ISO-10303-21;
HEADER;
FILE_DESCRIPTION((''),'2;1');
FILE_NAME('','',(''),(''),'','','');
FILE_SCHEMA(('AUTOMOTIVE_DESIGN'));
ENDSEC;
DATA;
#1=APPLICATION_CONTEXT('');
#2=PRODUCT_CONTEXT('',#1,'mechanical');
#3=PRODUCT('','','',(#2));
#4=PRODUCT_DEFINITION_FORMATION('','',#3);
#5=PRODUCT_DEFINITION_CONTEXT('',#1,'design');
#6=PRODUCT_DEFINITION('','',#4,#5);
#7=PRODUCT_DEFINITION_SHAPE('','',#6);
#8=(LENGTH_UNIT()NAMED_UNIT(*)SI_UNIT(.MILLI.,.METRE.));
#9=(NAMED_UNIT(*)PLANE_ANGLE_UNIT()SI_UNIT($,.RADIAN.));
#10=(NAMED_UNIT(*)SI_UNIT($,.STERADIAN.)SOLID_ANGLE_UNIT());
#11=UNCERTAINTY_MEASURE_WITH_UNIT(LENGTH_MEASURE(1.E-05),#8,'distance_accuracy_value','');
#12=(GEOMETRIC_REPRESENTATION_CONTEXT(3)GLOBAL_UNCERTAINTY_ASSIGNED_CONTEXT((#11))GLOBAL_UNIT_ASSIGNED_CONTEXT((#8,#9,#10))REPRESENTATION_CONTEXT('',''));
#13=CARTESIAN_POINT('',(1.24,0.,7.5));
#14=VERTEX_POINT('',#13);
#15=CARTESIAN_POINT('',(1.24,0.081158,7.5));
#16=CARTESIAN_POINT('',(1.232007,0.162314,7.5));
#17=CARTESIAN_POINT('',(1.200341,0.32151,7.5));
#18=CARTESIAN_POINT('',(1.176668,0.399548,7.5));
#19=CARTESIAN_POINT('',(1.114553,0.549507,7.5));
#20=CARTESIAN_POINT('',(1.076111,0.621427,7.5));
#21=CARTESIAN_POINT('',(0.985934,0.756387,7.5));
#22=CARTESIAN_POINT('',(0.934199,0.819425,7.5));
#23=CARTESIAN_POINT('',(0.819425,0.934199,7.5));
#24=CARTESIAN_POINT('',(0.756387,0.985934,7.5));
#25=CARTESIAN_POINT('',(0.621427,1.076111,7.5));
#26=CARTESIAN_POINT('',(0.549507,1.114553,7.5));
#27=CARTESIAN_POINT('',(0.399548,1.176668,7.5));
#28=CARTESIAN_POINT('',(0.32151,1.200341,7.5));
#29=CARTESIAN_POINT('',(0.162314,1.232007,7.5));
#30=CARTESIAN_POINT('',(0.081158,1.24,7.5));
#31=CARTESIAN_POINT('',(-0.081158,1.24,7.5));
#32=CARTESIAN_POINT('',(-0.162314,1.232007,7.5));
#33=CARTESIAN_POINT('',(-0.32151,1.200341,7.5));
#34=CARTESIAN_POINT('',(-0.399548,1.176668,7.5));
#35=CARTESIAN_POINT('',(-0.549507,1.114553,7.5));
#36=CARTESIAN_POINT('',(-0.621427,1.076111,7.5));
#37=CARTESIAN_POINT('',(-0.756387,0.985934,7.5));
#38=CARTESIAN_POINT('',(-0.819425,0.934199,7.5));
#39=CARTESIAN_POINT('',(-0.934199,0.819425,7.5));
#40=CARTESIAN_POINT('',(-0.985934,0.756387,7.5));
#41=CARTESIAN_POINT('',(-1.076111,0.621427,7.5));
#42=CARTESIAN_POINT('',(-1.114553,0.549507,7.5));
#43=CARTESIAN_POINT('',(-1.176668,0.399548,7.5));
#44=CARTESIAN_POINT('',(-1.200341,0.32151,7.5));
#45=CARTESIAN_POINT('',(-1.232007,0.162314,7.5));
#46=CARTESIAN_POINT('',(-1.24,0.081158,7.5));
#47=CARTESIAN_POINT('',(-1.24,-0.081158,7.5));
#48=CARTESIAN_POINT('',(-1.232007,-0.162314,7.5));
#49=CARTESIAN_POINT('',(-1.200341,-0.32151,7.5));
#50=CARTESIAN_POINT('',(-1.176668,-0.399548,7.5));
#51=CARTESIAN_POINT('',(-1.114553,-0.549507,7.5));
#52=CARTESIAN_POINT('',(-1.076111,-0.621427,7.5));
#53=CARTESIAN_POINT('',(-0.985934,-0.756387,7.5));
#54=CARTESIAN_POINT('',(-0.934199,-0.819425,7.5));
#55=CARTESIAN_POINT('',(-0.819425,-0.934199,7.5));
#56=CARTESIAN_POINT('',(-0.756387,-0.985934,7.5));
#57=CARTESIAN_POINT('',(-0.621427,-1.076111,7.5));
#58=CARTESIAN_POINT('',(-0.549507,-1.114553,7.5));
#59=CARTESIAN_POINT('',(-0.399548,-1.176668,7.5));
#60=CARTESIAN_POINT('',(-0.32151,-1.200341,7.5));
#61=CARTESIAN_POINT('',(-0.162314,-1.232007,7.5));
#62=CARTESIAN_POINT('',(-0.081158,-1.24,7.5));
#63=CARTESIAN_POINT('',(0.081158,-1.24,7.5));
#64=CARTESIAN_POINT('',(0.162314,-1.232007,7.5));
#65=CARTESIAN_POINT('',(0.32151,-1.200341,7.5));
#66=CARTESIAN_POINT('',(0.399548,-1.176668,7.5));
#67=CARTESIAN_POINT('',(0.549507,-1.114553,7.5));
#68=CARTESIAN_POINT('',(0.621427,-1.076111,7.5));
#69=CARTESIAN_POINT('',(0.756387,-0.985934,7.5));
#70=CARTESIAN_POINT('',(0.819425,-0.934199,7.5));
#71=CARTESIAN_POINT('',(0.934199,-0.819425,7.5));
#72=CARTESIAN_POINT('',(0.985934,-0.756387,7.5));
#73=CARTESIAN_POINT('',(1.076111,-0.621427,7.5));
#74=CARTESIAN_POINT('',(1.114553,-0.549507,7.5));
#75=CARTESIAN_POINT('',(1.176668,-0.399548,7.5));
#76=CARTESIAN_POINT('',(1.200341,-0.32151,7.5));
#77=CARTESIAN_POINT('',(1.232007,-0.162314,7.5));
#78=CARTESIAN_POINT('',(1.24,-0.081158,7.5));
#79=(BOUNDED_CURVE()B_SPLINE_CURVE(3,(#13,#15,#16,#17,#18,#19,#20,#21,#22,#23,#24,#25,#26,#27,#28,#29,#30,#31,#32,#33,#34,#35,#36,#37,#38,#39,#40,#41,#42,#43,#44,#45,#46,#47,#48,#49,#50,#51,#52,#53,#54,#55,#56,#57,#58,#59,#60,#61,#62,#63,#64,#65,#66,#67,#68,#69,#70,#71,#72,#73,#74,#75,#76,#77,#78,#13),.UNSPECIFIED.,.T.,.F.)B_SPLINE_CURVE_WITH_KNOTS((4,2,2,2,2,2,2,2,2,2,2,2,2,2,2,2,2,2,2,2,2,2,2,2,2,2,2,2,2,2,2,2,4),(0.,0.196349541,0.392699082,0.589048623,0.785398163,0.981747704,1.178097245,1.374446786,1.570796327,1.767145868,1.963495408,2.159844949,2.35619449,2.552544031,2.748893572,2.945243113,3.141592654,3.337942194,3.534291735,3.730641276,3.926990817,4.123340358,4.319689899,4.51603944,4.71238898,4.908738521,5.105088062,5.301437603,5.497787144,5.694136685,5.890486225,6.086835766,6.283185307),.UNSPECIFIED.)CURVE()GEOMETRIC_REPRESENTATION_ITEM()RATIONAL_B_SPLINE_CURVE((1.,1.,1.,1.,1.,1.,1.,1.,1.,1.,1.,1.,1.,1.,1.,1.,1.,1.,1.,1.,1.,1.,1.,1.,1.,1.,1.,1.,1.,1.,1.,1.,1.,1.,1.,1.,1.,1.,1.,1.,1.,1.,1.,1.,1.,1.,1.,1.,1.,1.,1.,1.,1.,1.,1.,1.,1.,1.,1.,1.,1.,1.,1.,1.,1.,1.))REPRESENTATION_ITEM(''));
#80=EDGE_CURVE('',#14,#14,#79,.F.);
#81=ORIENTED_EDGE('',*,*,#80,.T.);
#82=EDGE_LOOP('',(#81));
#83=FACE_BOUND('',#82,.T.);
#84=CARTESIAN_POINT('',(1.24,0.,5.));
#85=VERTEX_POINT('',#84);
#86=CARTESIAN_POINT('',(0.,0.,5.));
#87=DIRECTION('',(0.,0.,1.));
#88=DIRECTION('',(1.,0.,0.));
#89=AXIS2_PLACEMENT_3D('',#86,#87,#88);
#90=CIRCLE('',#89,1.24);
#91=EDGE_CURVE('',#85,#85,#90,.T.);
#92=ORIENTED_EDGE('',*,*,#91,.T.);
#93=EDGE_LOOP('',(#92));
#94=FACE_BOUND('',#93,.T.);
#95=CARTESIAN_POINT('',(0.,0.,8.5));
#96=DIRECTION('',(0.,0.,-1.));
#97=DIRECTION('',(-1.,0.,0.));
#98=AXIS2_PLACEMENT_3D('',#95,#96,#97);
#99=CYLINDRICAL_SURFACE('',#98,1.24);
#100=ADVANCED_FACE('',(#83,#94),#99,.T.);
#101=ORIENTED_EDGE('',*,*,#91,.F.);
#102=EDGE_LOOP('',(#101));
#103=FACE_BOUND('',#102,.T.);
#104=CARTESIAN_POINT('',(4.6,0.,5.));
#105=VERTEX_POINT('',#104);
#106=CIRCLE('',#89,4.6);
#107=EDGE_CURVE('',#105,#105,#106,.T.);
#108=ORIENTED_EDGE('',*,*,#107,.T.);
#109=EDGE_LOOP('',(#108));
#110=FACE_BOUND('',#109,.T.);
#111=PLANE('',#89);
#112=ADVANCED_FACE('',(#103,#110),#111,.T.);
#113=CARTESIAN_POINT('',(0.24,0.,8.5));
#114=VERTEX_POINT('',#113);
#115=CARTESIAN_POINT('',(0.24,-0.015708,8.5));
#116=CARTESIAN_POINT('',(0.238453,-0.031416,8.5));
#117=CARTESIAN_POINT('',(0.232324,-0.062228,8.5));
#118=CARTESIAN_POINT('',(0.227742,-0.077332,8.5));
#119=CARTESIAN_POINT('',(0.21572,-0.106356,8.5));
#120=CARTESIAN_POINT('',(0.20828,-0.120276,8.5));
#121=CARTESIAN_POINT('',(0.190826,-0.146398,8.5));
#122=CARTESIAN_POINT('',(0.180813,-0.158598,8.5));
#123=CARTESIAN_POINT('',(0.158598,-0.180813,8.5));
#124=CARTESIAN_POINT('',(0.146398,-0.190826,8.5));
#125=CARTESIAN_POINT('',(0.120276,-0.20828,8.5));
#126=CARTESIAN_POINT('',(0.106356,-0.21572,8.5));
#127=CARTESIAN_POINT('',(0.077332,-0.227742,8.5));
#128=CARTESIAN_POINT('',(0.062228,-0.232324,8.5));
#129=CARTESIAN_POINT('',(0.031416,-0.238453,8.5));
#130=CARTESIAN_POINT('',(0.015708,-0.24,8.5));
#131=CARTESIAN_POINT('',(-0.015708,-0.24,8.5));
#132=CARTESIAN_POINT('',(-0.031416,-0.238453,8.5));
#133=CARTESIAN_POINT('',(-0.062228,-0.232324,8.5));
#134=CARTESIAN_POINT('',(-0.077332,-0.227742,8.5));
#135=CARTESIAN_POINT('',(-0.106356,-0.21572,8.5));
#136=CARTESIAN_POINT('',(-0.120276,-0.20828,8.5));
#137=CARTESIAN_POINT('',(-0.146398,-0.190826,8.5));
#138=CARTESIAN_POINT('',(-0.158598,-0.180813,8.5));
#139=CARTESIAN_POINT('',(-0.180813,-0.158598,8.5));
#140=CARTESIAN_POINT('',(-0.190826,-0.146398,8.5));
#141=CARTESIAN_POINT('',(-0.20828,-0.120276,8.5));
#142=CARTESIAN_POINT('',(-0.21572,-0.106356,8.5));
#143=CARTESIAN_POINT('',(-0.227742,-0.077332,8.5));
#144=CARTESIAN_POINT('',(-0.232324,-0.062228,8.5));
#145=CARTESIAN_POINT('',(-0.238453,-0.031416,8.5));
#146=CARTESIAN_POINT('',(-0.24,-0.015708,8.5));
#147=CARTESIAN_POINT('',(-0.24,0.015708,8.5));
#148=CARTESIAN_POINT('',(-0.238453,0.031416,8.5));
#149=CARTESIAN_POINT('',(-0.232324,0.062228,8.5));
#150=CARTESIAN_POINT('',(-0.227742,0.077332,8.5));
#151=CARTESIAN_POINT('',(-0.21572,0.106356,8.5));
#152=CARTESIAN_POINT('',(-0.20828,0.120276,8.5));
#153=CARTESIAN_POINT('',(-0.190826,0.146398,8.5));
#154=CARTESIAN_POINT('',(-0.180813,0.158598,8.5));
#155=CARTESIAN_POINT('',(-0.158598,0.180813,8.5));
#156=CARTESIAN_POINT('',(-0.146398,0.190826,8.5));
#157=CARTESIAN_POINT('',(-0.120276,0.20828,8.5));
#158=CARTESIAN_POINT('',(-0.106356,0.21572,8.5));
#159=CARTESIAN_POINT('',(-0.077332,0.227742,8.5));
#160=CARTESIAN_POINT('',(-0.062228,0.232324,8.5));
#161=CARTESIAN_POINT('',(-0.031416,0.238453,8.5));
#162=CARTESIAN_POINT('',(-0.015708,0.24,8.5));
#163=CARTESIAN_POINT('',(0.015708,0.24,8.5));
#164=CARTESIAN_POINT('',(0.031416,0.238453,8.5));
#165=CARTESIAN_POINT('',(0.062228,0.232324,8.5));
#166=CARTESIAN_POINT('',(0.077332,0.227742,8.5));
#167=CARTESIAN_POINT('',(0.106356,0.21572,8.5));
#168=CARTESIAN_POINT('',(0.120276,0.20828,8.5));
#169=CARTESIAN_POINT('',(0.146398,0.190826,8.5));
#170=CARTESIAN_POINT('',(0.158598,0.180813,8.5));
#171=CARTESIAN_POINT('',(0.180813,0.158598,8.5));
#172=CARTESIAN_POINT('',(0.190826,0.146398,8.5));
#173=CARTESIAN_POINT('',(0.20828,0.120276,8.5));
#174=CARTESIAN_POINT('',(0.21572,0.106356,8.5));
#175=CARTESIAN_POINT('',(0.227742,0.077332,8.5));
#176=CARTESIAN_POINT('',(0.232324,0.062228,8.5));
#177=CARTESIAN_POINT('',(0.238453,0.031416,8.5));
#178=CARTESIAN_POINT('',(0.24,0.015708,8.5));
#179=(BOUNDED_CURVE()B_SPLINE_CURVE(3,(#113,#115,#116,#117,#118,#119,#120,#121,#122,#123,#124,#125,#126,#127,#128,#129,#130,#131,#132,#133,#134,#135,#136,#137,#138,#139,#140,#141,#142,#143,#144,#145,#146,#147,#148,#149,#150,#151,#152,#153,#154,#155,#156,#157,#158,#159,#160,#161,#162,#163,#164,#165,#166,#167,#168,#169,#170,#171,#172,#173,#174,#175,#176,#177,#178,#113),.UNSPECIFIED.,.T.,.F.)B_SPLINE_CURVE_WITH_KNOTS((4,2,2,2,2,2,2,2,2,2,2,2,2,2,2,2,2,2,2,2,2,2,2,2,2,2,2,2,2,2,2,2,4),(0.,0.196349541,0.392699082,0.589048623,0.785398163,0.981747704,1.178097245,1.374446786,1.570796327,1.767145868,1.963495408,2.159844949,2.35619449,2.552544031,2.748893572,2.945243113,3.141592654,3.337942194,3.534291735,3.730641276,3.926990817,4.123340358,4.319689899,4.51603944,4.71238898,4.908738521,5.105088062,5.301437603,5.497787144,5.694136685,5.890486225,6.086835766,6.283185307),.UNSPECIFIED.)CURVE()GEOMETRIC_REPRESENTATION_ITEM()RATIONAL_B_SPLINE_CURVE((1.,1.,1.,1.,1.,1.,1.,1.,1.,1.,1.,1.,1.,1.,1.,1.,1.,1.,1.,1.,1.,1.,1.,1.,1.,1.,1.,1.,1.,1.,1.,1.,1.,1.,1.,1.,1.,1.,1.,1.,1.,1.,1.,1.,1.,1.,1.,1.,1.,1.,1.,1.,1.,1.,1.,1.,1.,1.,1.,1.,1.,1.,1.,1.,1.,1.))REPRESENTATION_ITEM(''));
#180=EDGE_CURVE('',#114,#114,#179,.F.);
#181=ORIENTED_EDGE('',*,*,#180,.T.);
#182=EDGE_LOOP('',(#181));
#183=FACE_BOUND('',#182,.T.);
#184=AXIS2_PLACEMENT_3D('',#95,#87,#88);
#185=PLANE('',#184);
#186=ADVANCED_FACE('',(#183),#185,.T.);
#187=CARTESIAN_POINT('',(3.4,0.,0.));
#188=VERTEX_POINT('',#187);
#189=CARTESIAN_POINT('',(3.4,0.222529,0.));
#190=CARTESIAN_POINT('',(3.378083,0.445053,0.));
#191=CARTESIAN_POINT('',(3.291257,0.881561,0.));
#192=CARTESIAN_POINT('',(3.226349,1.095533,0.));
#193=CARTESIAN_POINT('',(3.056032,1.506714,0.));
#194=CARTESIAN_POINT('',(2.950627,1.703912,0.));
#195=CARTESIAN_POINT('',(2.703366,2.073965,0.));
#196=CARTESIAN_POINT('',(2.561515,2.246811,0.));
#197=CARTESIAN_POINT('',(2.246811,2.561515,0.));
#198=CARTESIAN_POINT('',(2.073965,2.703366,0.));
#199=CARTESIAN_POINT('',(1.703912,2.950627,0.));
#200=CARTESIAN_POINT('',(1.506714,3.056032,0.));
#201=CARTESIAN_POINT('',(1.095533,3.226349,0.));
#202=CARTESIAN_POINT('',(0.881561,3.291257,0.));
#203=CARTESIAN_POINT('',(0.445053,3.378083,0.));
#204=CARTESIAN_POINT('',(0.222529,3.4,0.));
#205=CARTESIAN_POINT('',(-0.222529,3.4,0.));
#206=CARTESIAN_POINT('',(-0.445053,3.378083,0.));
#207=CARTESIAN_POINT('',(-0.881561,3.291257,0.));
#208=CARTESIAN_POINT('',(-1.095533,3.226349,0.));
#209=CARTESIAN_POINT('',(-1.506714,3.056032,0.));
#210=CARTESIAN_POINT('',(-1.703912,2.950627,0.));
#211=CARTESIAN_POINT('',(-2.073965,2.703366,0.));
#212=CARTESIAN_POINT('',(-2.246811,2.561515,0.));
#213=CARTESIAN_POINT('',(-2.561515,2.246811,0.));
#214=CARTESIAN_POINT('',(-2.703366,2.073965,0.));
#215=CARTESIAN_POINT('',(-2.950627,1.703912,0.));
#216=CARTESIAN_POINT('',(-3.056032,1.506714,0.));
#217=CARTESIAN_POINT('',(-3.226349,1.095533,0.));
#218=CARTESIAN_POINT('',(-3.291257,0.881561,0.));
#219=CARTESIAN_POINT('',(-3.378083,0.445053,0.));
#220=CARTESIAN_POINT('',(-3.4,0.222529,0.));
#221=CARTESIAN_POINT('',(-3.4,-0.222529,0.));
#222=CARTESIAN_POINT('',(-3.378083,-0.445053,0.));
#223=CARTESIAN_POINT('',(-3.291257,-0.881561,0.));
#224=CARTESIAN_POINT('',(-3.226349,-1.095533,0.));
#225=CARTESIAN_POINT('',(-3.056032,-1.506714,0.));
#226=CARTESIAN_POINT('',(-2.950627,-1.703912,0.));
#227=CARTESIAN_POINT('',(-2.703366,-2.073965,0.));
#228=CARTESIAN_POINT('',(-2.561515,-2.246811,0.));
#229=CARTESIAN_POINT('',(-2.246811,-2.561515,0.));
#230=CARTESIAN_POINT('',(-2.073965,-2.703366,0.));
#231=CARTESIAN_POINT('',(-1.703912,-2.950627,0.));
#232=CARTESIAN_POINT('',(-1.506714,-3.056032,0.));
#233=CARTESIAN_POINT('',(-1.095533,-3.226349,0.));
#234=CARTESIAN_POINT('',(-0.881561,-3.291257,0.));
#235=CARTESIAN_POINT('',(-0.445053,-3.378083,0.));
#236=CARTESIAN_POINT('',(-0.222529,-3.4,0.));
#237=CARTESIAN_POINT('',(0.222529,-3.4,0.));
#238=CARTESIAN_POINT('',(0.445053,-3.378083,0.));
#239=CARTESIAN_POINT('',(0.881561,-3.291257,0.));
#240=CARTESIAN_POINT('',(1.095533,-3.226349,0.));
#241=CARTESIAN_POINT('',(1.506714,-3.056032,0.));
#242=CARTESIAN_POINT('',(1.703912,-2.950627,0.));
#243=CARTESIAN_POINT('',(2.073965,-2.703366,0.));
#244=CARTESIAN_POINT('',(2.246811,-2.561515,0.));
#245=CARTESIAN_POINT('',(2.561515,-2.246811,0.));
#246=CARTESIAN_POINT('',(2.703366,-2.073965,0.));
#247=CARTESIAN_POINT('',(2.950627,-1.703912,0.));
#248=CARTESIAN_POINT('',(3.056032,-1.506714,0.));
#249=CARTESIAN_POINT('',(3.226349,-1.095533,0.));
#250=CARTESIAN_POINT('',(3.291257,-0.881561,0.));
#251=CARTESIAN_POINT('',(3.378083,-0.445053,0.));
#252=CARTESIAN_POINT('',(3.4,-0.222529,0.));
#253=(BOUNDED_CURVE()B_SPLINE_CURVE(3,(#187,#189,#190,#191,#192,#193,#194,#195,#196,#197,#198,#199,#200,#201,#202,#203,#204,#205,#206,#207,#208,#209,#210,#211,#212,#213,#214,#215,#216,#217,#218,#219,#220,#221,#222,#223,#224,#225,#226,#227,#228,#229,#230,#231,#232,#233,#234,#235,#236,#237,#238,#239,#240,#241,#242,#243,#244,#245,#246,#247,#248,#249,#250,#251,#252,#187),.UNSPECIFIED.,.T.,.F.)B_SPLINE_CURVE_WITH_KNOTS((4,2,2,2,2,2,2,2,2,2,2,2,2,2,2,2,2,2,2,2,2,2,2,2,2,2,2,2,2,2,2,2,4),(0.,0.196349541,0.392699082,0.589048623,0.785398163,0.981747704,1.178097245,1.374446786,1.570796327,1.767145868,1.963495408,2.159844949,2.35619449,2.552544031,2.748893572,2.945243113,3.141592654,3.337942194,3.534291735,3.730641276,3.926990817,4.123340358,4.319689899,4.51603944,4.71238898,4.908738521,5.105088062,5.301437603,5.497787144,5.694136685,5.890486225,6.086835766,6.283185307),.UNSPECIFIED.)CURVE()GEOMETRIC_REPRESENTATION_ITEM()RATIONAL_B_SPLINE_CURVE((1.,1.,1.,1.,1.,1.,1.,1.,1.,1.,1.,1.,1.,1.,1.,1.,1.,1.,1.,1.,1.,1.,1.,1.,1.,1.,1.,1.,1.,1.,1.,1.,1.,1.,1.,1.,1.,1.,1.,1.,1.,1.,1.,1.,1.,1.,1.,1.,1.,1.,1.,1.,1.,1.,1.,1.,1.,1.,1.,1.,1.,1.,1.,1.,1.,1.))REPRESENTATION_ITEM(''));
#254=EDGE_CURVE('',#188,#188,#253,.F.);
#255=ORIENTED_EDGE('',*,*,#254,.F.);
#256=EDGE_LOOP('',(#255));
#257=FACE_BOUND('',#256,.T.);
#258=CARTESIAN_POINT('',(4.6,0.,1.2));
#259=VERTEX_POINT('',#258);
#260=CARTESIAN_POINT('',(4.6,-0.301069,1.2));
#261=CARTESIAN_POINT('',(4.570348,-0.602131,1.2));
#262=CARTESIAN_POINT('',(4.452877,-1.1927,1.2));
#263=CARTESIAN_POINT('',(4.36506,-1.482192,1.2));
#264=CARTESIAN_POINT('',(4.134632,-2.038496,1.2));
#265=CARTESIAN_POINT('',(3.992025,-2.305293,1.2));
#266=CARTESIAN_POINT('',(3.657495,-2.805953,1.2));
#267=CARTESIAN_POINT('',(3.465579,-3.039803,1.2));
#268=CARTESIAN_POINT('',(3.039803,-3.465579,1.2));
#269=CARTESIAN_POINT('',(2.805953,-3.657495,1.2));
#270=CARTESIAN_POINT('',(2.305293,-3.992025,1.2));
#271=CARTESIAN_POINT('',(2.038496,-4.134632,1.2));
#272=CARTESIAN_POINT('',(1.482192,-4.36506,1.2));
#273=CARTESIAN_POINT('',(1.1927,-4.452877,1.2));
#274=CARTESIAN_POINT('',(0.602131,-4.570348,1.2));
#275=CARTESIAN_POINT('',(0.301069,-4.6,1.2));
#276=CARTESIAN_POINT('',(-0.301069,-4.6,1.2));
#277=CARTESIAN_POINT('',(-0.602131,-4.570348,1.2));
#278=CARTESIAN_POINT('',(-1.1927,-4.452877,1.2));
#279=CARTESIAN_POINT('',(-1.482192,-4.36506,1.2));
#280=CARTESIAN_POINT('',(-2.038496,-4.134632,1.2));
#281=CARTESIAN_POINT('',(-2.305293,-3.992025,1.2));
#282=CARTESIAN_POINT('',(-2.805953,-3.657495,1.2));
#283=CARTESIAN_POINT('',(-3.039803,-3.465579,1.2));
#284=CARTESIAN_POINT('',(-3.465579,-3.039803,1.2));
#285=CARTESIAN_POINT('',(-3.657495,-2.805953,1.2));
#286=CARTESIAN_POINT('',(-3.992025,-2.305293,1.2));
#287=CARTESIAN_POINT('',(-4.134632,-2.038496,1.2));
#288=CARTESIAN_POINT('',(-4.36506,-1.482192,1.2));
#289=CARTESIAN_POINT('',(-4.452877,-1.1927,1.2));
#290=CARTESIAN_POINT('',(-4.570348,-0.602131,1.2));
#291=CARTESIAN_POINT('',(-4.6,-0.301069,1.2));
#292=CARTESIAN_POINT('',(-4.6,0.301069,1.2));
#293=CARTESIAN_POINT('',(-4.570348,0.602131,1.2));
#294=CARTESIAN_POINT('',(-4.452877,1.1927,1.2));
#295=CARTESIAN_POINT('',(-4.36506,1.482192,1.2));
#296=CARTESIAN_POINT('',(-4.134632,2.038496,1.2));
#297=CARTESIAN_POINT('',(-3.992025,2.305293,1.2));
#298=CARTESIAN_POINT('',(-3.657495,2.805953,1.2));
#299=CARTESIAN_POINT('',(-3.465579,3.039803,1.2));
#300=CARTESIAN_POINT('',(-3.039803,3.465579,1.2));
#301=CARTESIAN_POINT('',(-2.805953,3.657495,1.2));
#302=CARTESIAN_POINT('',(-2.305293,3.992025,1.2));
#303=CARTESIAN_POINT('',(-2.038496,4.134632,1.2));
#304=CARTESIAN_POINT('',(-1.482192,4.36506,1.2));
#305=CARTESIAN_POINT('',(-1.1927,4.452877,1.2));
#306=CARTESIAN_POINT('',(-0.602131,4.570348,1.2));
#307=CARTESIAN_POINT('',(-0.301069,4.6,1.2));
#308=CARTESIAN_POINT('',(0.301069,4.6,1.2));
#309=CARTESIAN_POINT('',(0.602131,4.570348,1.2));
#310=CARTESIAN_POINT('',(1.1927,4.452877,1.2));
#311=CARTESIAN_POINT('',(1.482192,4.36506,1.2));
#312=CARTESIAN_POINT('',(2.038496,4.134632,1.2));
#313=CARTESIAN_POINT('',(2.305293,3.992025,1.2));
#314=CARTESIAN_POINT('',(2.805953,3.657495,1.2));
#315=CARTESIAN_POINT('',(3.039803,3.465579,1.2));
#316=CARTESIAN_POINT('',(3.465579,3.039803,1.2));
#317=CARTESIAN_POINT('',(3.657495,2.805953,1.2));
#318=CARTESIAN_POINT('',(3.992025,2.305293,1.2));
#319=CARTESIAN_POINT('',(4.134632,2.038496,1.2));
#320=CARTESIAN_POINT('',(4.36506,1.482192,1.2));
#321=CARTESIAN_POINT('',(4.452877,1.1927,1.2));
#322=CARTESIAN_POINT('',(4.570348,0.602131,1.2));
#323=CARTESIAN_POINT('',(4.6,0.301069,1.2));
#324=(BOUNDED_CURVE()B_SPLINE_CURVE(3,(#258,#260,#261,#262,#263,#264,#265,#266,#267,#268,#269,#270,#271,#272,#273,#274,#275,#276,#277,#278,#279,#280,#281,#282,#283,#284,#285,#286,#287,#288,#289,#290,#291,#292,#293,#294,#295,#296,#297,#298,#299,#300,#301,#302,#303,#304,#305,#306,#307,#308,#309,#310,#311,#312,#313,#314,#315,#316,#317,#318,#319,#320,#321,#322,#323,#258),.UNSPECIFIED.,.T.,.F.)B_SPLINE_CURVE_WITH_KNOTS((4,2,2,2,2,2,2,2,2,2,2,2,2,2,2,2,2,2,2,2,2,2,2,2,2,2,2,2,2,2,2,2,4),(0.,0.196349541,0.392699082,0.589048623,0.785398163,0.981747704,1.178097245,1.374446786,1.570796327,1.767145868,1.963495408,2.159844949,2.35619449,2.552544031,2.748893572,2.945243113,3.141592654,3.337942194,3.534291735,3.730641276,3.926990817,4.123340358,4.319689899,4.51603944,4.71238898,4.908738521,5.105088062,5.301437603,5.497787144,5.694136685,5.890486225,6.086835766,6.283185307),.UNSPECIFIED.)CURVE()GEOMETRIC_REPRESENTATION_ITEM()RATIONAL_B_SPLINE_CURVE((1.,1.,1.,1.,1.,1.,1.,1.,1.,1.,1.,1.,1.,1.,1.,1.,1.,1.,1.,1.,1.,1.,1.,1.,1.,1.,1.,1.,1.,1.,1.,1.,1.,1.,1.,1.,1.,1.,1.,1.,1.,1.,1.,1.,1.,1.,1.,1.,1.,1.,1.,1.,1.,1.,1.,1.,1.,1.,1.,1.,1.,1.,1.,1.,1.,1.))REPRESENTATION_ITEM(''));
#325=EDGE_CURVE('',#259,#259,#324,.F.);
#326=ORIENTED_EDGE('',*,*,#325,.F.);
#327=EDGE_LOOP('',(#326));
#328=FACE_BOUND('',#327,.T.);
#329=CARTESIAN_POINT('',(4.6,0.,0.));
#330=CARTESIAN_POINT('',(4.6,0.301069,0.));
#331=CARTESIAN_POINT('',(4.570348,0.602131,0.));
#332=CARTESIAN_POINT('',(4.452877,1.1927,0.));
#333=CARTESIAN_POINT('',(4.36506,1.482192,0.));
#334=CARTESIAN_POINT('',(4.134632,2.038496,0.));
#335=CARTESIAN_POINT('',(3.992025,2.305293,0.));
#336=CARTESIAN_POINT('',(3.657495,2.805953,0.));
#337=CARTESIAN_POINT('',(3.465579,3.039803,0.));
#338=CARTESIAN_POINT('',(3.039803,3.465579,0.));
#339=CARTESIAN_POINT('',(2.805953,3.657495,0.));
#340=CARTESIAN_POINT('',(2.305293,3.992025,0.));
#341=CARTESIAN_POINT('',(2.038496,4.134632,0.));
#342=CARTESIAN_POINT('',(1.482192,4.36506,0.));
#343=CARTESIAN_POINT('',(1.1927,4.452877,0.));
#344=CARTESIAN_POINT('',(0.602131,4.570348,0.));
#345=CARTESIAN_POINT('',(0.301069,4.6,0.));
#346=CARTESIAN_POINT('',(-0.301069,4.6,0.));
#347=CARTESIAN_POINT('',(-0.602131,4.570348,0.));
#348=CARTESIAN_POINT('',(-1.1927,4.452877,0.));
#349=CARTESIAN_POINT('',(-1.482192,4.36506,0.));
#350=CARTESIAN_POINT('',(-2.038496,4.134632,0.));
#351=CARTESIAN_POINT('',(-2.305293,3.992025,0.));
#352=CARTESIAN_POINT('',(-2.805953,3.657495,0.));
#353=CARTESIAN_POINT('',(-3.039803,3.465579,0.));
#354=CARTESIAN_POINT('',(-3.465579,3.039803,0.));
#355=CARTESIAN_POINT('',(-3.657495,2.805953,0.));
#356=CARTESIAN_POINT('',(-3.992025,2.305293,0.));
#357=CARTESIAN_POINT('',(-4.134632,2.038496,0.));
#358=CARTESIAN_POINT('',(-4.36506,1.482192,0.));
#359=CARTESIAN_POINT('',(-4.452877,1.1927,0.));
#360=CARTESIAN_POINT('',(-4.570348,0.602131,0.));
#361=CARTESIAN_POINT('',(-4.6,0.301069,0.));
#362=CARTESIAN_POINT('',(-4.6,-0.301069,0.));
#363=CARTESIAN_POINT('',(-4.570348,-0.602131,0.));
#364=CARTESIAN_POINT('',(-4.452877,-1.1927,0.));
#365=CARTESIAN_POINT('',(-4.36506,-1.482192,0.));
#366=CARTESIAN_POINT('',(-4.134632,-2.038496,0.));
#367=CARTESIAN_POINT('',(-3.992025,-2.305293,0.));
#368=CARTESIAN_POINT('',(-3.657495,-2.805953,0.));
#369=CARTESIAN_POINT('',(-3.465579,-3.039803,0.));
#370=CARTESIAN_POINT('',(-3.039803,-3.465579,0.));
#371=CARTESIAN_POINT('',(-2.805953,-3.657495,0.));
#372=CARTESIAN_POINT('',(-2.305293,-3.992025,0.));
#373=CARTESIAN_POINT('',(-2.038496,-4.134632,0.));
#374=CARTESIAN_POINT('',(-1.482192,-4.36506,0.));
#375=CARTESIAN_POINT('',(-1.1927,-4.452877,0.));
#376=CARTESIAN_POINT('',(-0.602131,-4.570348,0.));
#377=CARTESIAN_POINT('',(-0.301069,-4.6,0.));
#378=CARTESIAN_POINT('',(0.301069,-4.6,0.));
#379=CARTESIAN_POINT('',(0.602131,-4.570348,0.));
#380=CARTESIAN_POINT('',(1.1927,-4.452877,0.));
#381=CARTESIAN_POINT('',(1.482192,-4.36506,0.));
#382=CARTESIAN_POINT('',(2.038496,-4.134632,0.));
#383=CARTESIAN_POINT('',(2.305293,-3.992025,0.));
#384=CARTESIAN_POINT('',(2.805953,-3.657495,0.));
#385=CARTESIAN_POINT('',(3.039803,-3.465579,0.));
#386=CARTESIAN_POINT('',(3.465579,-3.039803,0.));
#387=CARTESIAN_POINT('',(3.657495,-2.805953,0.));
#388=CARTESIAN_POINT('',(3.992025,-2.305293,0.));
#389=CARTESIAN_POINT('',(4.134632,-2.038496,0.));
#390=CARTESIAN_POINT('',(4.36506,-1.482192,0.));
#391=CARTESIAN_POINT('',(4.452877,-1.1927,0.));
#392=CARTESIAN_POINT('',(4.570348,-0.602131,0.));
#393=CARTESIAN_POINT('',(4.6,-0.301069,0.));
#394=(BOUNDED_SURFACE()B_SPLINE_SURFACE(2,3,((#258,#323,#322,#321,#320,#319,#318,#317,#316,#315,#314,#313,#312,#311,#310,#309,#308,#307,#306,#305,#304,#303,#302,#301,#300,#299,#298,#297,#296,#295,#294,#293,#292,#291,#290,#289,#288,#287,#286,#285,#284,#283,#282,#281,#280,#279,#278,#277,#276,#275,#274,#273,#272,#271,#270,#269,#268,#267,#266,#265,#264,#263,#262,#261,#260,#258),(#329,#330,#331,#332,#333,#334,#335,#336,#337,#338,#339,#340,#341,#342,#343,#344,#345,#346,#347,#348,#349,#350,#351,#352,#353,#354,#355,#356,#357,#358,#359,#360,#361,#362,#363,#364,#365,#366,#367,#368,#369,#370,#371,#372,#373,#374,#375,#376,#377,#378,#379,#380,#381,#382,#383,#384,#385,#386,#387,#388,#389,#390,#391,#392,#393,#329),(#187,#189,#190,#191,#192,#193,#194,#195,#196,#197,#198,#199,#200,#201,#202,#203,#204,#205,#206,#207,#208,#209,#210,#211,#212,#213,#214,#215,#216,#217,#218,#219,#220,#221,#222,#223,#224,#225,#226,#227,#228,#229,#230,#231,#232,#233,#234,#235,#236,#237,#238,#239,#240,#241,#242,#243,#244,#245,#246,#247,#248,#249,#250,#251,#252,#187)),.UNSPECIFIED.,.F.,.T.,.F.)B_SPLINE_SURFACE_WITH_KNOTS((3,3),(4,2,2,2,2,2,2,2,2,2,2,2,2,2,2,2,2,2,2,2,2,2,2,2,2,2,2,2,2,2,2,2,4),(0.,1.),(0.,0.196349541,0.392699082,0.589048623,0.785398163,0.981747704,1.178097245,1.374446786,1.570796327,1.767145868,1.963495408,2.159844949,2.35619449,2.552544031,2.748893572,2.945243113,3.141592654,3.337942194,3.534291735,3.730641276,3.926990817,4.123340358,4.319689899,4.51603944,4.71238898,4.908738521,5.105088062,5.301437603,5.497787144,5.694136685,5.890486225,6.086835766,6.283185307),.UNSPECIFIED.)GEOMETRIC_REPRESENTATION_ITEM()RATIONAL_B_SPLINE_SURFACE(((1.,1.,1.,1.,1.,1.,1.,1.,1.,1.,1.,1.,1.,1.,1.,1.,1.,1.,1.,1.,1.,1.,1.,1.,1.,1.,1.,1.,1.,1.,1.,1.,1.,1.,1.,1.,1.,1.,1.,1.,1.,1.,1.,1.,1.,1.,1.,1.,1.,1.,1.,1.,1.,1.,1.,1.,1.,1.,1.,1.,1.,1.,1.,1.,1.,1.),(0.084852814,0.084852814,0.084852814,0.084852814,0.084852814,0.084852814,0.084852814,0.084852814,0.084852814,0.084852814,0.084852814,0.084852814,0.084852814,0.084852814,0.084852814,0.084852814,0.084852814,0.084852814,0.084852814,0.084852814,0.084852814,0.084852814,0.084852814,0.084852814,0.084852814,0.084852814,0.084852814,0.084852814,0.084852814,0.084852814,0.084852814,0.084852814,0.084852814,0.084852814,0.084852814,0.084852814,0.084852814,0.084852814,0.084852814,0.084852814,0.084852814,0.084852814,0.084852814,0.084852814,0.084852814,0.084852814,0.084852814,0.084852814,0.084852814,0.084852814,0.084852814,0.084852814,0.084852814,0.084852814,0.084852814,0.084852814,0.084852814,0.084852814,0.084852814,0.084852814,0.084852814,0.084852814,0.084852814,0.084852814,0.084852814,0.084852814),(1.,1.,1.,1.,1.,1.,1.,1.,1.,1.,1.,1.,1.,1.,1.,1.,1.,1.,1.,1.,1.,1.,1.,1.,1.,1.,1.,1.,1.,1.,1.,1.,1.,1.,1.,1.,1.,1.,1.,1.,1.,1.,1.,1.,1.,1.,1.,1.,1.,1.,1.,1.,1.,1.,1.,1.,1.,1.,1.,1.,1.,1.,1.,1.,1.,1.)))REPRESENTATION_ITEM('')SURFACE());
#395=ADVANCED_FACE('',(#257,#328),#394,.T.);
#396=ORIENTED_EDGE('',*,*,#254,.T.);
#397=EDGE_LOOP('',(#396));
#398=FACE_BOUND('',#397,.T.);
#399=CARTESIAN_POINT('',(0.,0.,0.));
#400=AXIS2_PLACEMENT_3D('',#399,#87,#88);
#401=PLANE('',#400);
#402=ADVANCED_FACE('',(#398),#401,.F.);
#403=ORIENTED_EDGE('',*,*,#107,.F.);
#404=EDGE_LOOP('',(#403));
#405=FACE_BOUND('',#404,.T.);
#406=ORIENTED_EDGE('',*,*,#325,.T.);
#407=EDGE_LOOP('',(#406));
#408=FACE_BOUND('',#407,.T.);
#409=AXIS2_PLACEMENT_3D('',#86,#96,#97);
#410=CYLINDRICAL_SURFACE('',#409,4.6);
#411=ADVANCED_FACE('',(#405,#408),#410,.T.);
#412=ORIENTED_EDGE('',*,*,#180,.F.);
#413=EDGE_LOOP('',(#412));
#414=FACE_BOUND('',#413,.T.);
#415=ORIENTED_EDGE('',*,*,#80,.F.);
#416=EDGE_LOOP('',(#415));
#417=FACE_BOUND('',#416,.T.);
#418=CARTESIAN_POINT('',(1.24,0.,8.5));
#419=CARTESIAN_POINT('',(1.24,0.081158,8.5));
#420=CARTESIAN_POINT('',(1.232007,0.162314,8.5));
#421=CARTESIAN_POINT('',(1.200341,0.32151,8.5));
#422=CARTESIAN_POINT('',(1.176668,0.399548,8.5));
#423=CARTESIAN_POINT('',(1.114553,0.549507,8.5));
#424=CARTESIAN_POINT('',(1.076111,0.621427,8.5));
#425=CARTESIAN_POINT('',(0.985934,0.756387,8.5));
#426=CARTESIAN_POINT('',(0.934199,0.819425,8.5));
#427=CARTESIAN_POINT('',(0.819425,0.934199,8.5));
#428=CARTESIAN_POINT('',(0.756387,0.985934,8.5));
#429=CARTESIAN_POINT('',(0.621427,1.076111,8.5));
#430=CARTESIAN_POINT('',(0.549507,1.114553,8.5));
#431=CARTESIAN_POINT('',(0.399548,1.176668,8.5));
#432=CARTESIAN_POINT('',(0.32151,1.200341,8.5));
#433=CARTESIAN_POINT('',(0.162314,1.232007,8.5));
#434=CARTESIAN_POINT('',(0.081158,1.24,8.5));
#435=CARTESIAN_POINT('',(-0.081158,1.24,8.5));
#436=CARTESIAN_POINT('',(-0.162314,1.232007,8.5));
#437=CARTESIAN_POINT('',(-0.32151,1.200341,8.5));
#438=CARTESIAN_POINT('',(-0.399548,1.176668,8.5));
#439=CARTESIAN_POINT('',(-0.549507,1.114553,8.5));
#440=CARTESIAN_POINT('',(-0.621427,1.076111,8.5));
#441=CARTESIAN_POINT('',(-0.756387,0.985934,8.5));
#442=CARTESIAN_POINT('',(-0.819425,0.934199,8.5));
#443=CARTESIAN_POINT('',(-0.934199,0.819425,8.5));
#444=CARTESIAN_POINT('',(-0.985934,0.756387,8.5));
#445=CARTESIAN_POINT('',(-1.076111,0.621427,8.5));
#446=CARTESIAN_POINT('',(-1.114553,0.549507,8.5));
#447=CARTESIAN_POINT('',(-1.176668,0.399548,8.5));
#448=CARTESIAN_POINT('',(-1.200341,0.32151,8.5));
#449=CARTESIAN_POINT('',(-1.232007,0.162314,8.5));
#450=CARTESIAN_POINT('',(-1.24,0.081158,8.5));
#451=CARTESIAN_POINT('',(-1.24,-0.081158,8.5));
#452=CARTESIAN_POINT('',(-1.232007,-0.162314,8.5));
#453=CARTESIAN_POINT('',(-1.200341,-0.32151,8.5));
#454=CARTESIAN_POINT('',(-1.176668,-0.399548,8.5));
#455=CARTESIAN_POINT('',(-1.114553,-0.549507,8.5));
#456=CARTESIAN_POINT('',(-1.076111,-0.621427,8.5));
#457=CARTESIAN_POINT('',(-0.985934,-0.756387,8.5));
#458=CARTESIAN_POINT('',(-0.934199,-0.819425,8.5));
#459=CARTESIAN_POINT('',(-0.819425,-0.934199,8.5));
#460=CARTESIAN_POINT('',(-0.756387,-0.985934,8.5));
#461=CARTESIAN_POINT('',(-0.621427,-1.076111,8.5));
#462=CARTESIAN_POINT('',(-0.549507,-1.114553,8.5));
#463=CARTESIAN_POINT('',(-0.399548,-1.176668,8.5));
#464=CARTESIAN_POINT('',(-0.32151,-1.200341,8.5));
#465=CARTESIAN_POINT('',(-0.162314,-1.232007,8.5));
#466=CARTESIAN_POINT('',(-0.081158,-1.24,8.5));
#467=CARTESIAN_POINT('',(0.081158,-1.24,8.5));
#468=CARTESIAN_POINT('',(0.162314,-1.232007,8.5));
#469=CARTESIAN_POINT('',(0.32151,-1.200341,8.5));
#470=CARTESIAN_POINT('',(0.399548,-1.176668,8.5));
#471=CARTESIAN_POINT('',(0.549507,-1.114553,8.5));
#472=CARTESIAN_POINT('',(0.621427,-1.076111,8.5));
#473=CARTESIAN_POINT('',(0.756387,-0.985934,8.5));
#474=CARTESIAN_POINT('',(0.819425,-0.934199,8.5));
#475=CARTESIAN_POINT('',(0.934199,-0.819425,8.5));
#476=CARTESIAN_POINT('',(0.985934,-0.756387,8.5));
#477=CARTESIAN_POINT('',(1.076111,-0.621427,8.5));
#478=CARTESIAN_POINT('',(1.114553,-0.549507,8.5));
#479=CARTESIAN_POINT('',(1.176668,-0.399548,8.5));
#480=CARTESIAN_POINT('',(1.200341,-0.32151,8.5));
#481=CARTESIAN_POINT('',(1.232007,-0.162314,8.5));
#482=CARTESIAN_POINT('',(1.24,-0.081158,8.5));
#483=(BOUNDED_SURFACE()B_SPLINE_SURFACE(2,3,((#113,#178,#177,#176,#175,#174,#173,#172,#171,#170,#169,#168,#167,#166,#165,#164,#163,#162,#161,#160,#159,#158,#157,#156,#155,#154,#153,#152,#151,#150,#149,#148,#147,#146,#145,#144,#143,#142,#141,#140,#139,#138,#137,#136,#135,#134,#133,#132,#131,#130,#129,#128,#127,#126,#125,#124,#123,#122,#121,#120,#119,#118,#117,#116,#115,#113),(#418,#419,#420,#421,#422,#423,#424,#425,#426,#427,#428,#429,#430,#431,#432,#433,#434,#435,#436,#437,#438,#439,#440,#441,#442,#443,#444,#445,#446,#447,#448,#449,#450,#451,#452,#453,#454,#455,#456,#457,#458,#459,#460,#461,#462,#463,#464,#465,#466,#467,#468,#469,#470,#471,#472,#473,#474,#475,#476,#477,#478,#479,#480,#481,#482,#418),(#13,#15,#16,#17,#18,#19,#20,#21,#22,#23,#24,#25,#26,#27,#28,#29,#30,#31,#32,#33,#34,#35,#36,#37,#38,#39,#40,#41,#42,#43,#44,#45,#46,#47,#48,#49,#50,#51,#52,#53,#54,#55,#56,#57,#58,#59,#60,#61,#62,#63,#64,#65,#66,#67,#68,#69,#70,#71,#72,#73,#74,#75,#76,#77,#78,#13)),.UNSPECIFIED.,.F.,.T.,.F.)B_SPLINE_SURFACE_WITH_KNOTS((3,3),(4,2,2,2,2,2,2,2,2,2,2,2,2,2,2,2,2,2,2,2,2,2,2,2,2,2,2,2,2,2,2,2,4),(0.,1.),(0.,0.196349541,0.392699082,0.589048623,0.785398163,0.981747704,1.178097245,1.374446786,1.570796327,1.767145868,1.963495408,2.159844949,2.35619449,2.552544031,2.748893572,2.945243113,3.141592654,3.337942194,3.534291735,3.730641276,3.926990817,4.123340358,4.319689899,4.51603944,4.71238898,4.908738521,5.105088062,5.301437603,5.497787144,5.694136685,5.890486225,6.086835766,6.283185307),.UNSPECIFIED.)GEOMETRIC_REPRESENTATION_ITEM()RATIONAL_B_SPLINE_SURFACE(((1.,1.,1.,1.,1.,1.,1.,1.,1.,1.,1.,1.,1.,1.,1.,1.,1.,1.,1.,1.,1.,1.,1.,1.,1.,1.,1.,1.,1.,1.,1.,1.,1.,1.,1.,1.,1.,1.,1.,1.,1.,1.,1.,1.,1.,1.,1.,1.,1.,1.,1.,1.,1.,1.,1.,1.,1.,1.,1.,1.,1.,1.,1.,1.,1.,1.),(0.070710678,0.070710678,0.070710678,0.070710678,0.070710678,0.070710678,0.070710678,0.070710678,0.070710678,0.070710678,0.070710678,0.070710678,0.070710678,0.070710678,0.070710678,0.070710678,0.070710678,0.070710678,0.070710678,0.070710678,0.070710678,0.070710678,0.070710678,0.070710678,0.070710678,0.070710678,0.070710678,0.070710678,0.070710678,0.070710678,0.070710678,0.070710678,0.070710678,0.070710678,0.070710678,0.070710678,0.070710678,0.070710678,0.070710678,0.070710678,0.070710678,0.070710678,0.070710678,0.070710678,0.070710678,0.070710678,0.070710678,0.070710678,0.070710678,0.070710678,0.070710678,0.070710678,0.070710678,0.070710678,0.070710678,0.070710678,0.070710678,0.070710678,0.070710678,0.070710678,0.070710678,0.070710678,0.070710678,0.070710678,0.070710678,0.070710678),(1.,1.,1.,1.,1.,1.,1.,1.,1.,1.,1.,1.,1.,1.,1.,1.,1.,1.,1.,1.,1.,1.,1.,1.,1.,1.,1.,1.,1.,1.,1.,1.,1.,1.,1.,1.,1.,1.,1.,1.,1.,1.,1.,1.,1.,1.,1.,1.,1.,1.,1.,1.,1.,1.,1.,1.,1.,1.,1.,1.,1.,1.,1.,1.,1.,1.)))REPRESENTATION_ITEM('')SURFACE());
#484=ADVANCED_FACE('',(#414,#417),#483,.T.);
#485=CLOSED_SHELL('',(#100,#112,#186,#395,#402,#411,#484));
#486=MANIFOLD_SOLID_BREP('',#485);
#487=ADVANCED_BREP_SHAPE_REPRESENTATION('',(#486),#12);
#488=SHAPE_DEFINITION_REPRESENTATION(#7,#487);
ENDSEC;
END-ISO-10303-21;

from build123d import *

# Parameters (mm, degrees)
SKETCH_1_R      = 4.6
EXTRUDE_1_DEPTH = 5
SKETCH_2_R      = 1.24
EXTRUDE_2_DEPTH = 3.5
FILLET_1_SIZE   = 1
FILLET_2_SIZE   = 1.2


with BuildPart() as part:
    # 草图1 → 凸台-拉伸1 (new body)
    with BuildSketch(Plane.XY):
        Circle(SKETCH_1_R)
    extrude(amount=EXTRUDE_1_DEPTH)

    # 草图2 → 凸台-拉伸2 (add)
    with BuildSketch(Plane.XY.offset(5)):
        Circle(SKETCH_2_R)
    extrude(amount=EXTRUDE_2_DEPTH)

    # 圆角1
    # a fillet whose section is not a circle: 1 mm, written as the material it takes off along each edge
    with BuildSketch(Plane(origin=(0, 0, 8.5), x_dir=(1, 0, 0), z_dir=(0, -1, 0))) as fillet_1_piece_1:
        with BuildLine():
            Bezier((1.24, -FILLET_1_SIZE), (1.24, 0), (1.24 - FILLET_1_SIZE, 0), weights=[1, 0.070710678, 1])
            Line((1.24 - FILLET_1_SIZE, 0), (1.24, 0))
            Line((1.24, 0), (1.24, -FILLET_1_SIZE))
        make_face()
    revolve(axis=Axis((0, 0, 8.5), (0, 0, 1)), mode=Mode.SUBTRACT)

    # 圆角2
    # a fillet whose section is not a circle: 1.2 mm, written as the material it takes off along each edge
    with BuildSketch(Plane(origin=(0, 0, 0), x_dir=(1, 0, 0), z_dir=(0, -1, 0))) as fillet_2_piece_1:
        with BuildLine():
            Bezier((4.6, FILLET_2_SIZE), (4.6, 0), (4.6 - FILLET_2_SIZE, 0), weights=[1, 0.084852814, 1])
            Line((4.6 - FILLET_2_SIZE, 0), (4.6, 0))
            Line((4.6, 0), (4.6, FILLET_2_SIZE))
        make_face()
    revolve(axis=Axis((0, 0, 0), (0, 0, 1)), mode=Mode.SUBTRACT)


solid = part.part
